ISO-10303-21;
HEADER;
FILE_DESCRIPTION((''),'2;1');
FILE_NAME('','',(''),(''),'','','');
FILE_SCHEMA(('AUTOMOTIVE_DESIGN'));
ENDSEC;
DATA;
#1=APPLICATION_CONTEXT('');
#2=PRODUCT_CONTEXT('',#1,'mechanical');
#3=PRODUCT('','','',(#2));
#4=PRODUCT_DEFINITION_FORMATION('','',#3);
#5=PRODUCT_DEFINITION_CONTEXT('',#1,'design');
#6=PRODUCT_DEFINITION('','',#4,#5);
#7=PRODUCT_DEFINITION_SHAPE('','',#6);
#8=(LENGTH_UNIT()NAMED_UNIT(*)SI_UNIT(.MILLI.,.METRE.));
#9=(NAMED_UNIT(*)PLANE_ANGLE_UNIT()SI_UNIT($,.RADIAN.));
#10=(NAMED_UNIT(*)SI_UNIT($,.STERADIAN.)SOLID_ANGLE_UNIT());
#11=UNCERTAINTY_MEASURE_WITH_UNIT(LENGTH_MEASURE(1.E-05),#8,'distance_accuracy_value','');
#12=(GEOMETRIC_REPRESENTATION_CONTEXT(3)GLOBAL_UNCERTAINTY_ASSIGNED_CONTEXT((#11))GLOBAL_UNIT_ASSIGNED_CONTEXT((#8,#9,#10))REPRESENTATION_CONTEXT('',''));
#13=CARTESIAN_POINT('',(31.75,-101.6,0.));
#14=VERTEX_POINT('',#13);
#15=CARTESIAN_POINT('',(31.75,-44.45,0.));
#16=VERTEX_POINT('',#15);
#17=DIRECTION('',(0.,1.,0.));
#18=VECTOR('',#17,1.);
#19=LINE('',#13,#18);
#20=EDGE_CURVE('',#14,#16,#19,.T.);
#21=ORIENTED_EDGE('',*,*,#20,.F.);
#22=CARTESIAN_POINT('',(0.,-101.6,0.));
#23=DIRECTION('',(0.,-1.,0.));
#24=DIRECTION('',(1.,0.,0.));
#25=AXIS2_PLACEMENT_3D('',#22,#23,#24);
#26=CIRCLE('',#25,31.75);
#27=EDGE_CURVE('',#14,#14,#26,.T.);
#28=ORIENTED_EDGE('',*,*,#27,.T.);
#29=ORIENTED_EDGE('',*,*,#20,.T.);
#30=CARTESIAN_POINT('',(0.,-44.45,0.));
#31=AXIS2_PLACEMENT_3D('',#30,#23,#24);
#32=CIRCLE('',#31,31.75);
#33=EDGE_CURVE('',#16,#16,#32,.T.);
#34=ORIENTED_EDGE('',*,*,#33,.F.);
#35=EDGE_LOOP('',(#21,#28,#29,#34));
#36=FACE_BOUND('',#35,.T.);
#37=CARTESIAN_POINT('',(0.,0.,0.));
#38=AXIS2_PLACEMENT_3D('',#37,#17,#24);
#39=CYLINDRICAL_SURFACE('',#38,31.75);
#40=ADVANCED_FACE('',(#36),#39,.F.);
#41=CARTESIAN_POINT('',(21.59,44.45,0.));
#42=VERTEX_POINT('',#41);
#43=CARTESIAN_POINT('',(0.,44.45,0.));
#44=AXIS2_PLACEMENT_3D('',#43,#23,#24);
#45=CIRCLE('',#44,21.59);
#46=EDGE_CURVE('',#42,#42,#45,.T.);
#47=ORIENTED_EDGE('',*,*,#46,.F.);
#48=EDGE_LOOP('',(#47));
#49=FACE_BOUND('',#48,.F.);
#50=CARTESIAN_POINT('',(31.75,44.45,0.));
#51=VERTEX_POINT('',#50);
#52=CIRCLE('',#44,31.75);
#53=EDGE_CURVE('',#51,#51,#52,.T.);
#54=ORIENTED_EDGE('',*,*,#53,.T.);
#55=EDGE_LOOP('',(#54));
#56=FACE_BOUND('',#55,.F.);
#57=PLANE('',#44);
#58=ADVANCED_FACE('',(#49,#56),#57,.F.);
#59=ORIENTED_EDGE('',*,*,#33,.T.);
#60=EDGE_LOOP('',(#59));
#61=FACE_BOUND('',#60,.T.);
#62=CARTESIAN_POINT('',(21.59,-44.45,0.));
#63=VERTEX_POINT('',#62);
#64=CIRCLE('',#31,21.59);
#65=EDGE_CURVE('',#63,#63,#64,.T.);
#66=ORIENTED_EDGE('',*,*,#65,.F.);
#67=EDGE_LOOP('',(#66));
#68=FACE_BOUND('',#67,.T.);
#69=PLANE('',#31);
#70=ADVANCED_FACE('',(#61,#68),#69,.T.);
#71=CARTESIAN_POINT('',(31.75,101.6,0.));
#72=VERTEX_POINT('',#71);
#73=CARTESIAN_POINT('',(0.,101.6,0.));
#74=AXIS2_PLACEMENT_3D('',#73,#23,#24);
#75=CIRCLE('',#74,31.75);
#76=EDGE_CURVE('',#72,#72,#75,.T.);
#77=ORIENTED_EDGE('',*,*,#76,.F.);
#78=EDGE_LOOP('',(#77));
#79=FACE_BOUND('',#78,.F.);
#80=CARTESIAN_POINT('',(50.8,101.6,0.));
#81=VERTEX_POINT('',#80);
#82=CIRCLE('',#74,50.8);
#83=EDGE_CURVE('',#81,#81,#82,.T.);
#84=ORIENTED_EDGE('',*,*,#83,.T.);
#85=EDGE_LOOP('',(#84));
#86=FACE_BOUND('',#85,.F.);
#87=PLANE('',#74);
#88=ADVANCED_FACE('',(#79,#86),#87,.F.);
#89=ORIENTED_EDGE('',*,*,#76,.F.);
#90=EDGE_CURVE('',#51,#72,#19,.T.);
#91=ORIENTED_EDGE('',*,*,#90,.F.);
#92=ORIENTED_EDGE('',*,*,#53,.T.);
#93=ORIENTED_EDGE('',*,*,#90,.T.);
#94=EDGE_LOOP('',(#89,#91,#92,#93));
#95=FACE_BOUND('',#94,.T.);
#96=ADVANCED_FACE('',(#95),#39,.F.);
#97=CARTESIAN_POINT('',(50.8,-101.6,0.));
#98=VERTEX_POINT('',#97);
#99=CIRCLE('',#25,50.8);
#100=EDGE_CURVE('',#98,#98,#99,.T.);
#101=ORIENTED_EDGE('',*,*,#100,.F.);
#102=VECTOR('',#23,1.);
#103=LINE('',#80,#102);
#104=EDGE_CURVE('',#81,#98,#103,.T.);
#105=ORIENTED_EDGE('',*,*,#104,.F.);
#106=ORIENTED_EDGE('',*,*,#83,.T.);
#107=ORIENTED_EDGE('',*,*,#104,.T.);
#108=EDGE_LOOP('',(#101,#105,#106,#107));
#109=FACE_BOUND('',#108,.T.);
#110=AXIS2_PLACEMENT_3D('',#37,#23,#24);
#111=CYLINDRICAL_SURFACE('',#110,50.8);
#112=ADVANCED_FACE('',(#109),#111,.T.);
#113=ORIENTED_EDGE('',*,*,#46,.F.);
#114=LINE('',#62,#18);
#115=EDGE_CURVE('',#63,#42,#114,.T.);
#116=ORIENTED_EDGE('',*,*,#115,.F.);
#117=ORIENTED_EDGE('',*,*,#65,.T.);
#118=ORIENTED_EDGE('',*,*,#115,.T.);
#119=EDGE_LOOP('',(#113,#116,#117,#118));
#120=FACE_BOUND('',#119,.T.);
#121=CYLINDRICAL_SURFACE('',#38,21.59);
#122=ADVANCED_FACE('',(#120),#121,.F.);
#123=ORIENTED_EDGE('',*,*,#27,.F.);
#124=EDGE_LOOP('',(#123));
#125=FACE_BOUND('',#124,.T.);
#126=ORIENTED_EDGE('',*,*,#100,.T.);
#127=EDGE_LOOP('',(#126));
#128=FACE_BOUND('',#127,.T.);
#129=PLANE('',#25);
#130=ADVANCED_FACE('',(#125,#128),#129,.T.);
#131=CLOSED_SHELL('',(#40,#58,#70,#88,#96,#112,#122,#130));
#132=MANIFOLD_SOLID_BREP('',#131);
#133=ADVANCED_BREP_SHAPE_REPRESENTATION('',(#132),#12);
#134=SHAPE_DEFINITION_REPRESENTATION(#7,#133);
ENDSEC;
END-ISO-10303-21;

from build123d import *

# Parameters (mm, degrees)
F2_R     = 31.75
F2_R_2   = 21.59
F3_DEPTH = 44.45
F2_R_3   = 50.8
F4_DEPTH = 101.6


# Not quite as in the source:
# - a variable given as a bare number and used for a length is read in inches; the dataset says mm whatever the document's units were


with BuildPart() as f3:
    # F2 (on Front) → F3 (new body, symmetric)
    with BuildSketch(Plane.XZ):
        Circle(F2_R)
        Circle(F2_R_2, mode=Mode.SUBTRACT)
    extrude(amount=F3_DEPTH, both=True)

    # F2 (on Front) → F4 (join, symmetric)
    with BuildSketch(Plane.XZ):
        Circle(F2_R_3)
        Circle(F2_R, mode=Mode.SUBTRACT)
    extrude(amount=F4_DEPTH, both=True)


solid = f3.part
